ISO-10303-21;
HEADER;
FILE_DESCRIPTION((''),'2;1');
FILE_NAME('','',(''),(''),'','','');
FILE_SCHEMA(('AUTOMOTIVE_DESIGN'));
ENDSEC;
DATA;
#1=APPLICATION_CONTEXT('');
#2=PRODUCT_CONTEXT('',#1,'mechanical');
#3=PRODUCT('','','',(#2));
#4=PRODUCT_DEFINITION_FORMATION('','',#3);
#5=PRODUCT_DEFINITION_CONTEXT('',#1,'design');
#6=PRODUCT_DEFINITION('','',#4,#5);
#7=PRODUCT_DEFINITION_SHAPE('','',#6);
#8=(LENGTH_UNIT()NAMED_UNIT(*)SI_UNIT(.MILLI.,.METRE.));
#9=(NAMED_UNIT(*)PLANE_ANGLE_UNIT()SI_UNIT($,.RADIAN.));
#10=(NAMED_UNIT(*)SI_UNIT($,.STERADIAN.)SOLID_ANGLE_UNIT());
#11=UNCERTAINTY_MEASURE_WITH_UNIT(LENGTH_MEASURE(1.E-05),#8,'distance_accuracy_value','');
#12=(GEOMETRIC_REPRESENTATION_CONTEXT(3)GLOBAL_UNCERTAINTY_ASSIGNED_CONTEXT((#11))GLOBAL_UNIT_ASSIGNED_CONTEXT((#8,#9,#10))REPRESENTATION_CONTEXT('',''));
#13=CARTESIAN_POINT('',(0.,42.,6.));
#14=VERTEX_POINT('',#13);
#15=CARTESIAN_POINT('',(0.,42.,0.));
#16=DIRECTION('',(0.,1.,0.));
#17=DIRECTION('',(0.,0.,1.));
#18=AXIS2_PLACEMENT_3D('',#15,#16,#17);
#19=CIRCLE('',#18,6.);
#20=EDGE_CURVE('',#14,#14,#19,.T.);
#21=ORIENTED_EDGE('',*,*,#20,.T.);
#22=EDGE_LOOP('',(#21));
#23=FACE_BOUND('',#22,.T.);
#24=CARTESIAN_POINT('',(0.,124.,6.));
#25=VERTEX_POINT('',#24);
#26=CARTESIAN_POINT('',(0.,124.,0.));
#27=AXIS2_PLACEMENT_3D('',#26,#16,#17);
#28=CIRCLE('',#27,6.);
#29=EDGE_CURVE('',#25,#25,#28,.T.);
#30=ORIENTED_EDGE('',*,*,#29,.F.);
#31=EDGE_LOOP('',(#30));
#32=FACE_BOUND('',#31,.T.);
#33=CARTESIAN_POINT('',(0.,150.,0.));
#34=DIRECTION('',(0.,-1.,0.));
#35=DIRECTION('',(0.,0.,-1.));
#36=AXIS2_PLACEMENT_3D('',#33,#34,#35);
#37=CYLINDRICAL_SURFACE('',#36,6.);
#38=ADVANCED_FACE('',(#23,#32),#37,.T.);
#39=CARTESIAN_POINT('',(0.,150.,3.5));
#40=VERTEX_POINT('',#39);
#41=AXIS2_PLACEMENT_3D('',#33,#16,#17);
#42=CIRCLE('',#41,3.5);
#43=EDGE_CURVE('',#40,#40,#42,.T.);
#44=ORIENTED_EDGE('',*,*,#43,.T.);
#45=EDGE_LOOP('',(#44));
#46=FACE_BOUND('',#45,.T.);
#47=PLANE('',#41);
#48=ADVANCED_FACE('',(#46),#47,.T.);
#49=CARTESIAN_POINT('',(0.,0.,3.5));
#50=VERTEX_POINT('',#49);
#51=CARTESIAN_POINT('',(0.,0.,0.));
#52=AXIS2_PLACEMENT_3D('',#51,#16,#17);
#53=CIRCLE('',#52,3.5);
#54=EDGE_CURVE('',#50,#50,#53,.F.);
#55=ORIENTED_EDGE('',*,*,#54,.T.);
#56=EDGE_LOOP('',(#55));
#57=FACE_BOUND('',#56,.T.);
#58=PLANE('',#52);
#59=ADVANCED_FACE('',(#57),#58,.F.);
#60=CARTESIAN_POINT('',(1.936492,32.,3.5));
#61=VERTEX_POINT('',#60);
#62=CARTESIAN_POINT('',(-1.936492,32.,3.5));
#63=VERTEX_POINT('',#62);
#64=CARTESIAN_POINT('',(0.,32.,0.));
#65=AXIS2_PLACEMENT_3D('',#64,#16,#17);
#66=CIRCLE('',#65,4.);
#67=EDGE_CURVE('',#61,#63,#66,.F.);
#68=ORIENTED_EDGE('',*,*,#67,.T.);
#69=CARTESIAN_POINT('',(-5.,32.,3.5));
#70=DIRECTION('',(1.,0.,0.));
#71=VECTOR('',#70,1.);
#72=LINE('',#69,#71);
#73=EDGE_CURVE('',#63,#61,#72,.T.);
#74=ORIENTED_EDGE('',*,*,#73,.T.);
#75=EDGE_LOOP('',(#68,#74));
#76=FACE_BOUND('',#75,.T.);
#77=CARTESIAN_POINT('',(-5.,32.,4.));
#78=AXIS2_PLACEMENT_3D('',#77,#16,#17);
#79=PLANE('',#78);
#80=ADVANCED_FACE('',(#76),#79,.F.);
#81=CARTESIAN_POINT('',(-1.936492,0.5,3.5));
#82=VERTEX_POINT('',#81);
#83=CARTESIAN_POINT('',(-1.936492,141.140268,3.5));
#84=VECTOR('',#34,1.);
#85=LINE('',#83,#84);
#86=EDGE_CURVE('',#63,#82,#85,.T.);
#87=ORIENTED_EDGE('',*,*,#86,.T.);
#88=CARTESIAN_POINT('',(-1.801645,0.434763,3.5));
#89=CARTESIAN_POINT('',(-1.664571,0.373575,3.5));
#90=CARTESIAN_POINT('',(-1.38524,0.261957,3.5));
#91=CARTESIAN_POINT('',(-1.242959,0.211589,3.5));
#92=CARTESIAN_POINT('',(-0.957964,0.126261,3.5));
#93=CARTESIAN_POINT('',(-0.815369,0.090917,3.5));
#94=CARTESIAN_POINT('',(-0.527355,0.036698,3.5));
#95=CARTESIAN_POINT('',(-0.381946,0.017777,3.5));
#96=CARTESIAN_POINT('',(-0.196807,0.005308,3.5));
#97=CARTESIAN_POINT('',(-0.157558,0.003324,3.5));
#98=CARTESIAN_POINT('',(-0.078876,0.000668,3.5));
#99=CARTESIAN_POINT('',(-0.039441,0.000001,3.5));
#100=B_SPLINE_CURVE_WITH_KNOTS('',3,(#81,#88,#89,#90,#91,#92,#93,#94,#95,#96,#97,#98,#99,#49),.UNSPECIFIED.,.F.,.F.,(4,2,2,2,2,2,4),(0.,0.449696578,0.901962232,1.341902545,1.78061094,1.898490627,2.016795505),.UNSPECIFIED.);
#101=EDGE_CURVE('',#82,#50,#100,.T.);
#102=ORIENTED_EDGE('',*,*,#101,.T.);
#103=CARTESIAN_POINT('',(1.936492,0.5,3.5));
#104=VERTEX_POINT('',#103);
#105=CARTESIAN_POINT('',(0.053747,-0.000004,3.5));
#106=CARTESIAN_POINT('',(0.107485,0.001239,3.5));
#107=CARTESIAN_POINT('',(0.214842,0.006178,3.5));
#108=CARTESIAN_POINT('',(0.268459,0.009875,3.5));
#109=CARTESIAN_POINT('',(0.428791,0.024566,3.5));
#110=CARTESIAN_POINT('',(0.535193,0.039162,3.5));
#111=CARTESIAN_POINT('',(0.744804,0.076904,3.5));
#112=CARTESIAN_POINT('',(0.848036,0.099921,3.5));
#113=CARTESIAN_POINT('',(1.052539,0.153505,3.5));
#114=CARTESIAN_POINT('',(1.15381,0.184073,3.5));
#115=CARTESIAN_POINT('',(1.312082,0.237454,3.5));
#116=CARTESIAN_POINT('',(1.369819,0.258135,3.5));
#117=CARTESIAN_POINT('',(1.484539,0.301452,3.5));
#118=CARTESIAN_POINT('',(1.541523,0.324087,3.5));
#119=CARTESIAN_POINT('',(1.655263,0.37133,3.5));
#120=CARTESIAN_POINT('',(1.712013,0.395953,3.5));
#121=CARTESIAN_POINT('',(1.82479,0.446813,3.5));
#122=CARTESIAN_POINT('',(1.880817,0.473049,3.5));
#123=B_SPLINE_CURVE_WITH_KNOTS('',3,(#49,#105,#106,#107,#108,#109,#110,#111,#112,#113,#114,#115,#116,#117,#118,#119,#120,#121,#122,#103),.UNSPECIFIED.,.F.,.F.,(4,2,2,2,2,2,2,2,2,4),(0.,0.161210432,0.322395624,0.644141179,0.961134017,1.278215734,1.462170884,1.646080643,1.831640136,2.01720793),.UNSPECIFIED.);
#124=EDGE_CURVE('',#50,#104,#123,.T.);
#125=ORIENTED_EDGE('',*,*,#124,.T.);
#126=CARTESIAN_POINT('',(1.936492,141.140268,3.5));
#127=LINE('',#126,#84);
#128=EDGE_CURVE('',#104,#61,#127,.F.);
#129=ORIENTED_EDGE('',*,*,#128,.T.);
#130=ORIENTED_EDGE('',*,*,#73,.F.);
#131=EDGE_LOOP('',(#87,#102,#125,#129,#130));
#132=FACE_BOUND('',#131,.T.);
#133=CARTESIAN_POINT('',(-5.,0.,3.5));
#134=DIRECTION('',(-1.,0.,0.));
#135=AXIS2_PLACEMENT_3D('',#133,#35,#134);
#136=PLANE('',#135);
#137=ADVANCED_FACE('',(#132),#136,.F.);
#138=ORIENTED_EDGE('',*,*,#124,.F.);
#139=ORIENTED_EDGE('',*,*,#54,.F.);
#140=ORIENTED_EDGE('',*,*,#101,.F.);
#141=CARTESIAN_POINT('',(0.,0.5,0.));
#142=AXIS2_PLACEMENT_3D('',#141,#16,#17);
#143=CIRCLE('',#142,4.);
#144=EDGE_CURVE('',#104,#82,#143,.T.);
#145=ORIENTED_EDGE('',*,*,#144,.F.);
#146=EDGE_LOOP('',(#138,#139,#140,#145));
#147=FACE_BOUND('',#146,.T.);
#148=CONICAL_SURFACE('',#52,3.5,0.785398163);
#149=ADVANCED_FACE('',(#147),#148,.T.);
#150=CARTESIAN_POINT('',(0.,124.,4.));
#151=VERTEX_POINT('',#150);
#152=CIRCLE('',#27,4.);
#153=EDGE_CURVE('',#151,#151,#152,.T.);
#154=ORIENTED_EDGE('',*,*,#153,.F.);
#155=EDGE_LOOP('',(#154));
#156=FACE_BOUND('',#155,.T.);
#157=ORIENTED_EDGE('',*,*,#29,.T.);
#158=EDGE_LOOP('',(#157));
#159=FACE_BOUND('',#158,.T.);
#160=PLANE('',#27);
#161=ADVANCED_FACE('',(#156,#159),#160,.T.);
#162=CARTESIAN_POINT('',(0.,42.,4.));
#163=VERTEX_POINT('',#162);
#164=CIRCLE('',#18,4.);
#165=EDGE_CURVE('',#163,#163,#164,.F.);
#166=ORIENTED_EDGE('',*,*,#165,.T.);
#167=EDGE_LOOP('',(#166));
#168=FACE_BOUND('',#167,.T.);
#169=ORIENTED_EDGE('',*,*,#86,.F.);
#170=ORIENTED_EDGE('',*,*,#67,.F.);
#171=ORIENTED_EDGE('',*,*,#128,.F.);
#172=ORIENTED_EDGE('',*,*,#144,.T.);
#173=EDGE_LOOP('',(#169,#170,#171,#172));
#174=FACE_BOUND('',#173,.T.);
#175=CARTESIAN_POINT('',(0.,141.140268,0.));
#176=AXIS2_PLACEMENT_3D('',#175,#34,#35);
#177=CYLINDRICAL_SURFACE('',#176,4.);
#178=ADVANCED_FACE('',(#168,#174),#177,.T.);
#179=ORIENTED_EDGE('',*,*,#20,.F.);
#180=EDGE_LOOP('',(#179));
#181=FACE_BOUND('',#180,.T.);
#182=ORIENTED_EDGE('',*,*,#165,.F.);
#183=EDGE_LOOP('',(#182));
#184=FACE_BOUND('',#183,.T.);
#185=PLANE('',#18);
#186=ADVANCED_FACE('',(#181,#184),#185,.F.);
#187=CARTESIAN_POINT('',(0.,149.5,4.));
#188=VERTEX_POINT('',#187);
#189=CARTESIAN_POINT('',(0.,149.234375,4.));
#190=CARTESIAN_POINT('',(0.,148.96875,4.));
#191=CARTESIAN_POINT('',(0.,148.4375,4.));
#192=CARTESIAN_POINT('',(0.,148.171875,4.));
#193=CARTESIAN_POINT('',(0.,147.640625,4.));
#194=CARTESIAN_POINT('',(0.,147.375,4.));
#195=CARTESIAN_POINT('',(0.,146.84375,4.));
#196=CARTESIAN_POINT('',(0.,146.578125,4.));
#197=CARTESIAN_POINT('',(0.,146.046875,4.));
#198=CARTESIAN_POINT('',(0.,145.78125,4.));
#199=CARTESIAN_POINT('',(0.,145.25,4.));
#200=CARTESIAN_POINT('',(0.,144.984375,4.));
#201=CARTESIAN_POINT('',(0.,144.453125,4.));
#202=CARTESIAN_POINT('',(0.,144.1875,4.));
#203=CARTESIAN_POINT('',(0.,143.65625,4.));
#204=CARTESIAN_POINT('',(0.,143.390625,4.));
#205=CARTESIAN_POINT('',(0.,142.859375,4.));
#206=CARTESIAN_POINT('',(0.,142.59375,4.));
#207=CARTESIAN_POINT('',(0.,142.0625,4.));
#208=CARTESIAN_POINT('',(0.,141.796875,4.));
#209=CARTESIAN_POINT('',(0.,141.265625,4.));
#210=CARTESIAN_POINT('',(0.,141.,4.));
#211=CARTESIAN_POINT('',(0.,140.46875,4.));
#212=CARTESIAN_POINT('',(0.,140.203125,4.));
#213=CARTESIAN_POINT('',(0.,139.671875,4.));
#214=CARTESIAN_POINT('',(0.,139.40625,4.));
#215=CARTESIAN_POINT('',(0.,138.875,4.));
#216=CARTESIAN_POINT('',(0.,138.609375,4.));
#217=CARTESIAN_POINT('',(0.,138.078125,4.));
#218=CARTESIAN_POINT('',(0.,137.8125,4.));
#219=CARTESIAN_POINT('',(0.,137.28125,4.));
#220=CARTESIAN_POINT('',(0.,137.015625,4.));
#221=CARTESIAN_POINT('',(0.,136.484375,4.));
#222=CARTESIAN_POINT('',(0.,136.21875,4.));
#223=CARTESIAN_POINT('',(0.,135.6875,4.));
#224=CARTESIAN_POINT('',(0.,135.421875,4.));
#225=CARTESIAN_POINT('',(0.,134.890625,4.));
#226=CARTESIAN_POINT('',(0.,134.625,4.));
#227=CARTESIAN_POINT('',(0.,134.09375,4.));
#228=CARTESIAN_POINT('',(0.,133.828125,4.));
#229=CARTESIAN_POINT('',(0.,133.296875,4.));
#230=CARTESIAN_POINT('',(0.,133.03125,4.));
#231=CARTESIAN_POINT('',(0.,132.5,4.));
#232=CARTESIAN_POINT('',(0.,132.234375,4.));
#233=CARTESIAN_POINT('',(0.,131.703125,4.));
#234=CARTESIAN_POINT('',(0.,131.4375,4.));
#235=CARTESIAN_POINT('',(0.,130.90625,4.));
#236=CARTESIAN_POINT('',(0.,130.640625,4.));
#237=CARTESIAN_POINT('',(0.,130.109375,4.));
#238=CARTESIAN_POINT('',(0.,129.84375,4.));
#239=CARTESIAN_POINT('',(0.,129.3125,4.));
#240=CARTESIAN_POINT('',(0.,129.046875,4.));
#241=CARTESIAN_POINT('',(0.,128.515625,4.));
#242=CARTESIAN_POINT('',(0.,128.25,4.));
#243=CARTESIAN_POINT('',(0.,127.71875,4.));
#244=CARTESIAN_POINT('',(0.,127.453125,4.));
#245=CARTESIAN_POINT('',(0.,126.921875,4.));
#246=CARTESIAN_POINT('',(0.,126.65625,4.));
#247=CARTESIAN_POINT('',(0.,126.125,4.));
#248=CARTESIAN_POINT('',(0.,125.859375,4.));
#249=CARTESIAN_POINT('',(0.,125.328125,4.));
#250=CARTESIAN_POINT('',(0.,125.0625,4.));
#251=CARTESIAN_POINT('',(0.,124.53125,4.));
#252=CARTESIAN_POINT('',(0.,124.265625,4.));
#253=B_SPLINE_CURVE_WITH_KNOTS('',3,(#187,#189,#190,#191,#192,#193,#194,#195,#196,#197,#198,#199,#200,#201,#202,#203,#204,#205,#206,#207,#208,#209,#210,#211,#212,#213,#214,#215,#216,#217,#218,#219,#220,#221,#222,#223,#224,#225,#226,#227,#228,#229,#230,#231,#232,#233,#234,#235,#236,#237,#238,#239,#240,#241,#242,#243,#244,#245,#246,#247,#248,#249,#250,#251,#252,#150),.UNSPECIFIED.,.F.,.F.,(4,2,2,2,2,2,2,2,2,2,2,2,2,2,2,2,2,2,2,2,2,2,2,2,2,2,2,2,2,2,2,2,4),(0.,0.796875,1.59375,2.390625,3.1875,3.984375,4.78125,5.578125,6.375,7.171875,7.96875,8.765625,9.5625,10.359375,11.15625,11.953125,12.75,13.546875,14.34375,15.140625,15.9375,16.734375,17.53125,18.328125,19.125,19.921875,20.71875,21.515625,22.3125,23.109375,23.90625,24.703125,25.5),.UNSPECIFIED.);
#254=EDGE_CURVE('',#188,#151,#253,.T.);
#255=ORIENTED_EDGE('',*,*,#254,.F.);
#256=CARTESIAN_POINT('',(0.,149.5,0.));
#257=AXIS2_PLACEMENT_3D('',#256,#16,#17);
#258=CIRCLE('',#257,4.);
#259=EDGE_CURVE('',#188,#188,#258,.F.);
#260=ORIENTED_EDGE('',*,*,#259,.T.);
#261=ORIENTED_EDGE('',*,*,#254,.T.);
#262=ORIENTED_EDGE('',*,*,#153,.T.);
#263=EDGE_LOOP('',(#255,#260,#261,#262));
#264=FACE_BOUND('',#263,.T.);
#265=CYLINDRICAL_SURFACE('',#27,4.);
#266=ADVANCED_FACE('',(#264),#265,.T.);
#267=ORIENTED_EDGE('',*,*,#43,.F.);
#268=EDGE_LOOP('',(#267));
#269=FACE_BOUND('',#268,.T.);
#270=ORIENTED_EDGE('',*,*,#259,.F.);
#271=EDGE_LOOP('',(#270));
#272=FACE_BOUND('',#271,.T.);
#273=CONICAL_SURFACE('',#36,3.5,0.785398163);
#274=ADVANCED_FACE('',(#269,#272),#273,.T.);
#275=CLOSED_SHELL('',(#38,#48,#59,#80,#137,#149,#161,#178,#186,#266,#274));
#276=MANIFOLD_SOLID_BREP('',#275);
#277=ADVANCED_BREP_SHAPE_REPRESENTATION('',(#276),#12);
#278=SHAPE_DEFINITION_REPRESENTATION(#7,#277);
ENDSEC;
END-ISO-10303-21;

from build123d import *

# Parameters (mm, degrees)
SKETCH1_R           = 6
BOSS_EXTRUDE1_DEPTH = 150
SKETCH2_OUTSIDE_W   = 44.192
SKETCH2_OUTSIDE_H   = 44.192
SKETCH2_OUTSIDE_R   = 4
CUT_EXTRUDE1_DEPTH  = 26
SKETCH3_OUTSIDE_W   = 44.192
SKETCH3_OUTSIDE_H   = 44.192
SKETCH3_OUTSIDE_R   = 4
CUT_EXTRUDE2_DEPTH  = 42
SKETCH4_W           = 0.5
SKETCH4_H           = 32
CUT_EXTRUDE3_DEPTH  = 5
CHAMFER1_SIZE       = 0.5


with BuildPart() as part:
    # Sketch1 → Boss-Extrude1 (new body)
    with BuildSketch(Plane(origin=(0, 0, 0), x_dir=(1, 0, 0), z_dir=(0, 1, 0))):
        with Locations(Location((0, 0, 0), (0, 0, 270))):
            Circle(SKETCH1_R)
    extrude(amount=BOSS_EXTRUDE1_DEPTH)

    # Sketch2 outside → Cut-Extrude1 (cut)
    with BuildSketch(Plane(origin=(0, 150, 0), x_dir=(1, 0, 0), z_dir=(0, 1, 0))):
        Rectangle(SKETCH2_OUTSIDE_W, SKETCH2_OUTSIDE_H)
        with Locations(Location((0, 0, 0), (0, 0, 270))):
            Circle(SKETCH2_OUTSIDE_R, mode=Mode.SUBTRACT)
    extrude(amount=-CUT_EXTRUDE1_DEPTH, mode=Mode.SUBTRACT)

    # Sketch3 outside → Cut-Extrude2 (cut)
    with BuildSketch(Plane.XZ):
        Rectangle(SKETCH3_OUTSIDE_W, SKETCH3_OUTSIDE_H)
        with Locations(Location((0, 0, 0), (0, 0, 90))):
            Circle(SKETCH3_OUTSIDE_R, mode=Mode.SUBTRACT)
    extrude(amount=-CUT_EXTRUDE2_DEPTH, mode=Mode.SUBTRACT)

    # Sketch4 → Cut-Extrude3 (cut, symmetric)
    with BuildSketch(Plane(origin=(0, 0, 0), x_dir=(0, 0, -1), z_dir=(1, 0, 0))):
        with Locations((-3.75, 16)):
            Rectangle(SKETCH4_W, SKETCH4_H)
    extrude(amount=CUT_EXTRUDE3_DEPTH, both=True, mode=Mode.SUBTRACT)

    # Chamfer1
    chamfer1_edges = [part.edges().sort_by_distance(p)[0] for p in [
        (0, 0, -4),
        (0, 150, -4),
    ]]
    chamfer(chamfer1_edges, length=CHAMFER1_SIZE - 0.0001)  # a hair under: the kernel refuses the full size


solid = part.part
